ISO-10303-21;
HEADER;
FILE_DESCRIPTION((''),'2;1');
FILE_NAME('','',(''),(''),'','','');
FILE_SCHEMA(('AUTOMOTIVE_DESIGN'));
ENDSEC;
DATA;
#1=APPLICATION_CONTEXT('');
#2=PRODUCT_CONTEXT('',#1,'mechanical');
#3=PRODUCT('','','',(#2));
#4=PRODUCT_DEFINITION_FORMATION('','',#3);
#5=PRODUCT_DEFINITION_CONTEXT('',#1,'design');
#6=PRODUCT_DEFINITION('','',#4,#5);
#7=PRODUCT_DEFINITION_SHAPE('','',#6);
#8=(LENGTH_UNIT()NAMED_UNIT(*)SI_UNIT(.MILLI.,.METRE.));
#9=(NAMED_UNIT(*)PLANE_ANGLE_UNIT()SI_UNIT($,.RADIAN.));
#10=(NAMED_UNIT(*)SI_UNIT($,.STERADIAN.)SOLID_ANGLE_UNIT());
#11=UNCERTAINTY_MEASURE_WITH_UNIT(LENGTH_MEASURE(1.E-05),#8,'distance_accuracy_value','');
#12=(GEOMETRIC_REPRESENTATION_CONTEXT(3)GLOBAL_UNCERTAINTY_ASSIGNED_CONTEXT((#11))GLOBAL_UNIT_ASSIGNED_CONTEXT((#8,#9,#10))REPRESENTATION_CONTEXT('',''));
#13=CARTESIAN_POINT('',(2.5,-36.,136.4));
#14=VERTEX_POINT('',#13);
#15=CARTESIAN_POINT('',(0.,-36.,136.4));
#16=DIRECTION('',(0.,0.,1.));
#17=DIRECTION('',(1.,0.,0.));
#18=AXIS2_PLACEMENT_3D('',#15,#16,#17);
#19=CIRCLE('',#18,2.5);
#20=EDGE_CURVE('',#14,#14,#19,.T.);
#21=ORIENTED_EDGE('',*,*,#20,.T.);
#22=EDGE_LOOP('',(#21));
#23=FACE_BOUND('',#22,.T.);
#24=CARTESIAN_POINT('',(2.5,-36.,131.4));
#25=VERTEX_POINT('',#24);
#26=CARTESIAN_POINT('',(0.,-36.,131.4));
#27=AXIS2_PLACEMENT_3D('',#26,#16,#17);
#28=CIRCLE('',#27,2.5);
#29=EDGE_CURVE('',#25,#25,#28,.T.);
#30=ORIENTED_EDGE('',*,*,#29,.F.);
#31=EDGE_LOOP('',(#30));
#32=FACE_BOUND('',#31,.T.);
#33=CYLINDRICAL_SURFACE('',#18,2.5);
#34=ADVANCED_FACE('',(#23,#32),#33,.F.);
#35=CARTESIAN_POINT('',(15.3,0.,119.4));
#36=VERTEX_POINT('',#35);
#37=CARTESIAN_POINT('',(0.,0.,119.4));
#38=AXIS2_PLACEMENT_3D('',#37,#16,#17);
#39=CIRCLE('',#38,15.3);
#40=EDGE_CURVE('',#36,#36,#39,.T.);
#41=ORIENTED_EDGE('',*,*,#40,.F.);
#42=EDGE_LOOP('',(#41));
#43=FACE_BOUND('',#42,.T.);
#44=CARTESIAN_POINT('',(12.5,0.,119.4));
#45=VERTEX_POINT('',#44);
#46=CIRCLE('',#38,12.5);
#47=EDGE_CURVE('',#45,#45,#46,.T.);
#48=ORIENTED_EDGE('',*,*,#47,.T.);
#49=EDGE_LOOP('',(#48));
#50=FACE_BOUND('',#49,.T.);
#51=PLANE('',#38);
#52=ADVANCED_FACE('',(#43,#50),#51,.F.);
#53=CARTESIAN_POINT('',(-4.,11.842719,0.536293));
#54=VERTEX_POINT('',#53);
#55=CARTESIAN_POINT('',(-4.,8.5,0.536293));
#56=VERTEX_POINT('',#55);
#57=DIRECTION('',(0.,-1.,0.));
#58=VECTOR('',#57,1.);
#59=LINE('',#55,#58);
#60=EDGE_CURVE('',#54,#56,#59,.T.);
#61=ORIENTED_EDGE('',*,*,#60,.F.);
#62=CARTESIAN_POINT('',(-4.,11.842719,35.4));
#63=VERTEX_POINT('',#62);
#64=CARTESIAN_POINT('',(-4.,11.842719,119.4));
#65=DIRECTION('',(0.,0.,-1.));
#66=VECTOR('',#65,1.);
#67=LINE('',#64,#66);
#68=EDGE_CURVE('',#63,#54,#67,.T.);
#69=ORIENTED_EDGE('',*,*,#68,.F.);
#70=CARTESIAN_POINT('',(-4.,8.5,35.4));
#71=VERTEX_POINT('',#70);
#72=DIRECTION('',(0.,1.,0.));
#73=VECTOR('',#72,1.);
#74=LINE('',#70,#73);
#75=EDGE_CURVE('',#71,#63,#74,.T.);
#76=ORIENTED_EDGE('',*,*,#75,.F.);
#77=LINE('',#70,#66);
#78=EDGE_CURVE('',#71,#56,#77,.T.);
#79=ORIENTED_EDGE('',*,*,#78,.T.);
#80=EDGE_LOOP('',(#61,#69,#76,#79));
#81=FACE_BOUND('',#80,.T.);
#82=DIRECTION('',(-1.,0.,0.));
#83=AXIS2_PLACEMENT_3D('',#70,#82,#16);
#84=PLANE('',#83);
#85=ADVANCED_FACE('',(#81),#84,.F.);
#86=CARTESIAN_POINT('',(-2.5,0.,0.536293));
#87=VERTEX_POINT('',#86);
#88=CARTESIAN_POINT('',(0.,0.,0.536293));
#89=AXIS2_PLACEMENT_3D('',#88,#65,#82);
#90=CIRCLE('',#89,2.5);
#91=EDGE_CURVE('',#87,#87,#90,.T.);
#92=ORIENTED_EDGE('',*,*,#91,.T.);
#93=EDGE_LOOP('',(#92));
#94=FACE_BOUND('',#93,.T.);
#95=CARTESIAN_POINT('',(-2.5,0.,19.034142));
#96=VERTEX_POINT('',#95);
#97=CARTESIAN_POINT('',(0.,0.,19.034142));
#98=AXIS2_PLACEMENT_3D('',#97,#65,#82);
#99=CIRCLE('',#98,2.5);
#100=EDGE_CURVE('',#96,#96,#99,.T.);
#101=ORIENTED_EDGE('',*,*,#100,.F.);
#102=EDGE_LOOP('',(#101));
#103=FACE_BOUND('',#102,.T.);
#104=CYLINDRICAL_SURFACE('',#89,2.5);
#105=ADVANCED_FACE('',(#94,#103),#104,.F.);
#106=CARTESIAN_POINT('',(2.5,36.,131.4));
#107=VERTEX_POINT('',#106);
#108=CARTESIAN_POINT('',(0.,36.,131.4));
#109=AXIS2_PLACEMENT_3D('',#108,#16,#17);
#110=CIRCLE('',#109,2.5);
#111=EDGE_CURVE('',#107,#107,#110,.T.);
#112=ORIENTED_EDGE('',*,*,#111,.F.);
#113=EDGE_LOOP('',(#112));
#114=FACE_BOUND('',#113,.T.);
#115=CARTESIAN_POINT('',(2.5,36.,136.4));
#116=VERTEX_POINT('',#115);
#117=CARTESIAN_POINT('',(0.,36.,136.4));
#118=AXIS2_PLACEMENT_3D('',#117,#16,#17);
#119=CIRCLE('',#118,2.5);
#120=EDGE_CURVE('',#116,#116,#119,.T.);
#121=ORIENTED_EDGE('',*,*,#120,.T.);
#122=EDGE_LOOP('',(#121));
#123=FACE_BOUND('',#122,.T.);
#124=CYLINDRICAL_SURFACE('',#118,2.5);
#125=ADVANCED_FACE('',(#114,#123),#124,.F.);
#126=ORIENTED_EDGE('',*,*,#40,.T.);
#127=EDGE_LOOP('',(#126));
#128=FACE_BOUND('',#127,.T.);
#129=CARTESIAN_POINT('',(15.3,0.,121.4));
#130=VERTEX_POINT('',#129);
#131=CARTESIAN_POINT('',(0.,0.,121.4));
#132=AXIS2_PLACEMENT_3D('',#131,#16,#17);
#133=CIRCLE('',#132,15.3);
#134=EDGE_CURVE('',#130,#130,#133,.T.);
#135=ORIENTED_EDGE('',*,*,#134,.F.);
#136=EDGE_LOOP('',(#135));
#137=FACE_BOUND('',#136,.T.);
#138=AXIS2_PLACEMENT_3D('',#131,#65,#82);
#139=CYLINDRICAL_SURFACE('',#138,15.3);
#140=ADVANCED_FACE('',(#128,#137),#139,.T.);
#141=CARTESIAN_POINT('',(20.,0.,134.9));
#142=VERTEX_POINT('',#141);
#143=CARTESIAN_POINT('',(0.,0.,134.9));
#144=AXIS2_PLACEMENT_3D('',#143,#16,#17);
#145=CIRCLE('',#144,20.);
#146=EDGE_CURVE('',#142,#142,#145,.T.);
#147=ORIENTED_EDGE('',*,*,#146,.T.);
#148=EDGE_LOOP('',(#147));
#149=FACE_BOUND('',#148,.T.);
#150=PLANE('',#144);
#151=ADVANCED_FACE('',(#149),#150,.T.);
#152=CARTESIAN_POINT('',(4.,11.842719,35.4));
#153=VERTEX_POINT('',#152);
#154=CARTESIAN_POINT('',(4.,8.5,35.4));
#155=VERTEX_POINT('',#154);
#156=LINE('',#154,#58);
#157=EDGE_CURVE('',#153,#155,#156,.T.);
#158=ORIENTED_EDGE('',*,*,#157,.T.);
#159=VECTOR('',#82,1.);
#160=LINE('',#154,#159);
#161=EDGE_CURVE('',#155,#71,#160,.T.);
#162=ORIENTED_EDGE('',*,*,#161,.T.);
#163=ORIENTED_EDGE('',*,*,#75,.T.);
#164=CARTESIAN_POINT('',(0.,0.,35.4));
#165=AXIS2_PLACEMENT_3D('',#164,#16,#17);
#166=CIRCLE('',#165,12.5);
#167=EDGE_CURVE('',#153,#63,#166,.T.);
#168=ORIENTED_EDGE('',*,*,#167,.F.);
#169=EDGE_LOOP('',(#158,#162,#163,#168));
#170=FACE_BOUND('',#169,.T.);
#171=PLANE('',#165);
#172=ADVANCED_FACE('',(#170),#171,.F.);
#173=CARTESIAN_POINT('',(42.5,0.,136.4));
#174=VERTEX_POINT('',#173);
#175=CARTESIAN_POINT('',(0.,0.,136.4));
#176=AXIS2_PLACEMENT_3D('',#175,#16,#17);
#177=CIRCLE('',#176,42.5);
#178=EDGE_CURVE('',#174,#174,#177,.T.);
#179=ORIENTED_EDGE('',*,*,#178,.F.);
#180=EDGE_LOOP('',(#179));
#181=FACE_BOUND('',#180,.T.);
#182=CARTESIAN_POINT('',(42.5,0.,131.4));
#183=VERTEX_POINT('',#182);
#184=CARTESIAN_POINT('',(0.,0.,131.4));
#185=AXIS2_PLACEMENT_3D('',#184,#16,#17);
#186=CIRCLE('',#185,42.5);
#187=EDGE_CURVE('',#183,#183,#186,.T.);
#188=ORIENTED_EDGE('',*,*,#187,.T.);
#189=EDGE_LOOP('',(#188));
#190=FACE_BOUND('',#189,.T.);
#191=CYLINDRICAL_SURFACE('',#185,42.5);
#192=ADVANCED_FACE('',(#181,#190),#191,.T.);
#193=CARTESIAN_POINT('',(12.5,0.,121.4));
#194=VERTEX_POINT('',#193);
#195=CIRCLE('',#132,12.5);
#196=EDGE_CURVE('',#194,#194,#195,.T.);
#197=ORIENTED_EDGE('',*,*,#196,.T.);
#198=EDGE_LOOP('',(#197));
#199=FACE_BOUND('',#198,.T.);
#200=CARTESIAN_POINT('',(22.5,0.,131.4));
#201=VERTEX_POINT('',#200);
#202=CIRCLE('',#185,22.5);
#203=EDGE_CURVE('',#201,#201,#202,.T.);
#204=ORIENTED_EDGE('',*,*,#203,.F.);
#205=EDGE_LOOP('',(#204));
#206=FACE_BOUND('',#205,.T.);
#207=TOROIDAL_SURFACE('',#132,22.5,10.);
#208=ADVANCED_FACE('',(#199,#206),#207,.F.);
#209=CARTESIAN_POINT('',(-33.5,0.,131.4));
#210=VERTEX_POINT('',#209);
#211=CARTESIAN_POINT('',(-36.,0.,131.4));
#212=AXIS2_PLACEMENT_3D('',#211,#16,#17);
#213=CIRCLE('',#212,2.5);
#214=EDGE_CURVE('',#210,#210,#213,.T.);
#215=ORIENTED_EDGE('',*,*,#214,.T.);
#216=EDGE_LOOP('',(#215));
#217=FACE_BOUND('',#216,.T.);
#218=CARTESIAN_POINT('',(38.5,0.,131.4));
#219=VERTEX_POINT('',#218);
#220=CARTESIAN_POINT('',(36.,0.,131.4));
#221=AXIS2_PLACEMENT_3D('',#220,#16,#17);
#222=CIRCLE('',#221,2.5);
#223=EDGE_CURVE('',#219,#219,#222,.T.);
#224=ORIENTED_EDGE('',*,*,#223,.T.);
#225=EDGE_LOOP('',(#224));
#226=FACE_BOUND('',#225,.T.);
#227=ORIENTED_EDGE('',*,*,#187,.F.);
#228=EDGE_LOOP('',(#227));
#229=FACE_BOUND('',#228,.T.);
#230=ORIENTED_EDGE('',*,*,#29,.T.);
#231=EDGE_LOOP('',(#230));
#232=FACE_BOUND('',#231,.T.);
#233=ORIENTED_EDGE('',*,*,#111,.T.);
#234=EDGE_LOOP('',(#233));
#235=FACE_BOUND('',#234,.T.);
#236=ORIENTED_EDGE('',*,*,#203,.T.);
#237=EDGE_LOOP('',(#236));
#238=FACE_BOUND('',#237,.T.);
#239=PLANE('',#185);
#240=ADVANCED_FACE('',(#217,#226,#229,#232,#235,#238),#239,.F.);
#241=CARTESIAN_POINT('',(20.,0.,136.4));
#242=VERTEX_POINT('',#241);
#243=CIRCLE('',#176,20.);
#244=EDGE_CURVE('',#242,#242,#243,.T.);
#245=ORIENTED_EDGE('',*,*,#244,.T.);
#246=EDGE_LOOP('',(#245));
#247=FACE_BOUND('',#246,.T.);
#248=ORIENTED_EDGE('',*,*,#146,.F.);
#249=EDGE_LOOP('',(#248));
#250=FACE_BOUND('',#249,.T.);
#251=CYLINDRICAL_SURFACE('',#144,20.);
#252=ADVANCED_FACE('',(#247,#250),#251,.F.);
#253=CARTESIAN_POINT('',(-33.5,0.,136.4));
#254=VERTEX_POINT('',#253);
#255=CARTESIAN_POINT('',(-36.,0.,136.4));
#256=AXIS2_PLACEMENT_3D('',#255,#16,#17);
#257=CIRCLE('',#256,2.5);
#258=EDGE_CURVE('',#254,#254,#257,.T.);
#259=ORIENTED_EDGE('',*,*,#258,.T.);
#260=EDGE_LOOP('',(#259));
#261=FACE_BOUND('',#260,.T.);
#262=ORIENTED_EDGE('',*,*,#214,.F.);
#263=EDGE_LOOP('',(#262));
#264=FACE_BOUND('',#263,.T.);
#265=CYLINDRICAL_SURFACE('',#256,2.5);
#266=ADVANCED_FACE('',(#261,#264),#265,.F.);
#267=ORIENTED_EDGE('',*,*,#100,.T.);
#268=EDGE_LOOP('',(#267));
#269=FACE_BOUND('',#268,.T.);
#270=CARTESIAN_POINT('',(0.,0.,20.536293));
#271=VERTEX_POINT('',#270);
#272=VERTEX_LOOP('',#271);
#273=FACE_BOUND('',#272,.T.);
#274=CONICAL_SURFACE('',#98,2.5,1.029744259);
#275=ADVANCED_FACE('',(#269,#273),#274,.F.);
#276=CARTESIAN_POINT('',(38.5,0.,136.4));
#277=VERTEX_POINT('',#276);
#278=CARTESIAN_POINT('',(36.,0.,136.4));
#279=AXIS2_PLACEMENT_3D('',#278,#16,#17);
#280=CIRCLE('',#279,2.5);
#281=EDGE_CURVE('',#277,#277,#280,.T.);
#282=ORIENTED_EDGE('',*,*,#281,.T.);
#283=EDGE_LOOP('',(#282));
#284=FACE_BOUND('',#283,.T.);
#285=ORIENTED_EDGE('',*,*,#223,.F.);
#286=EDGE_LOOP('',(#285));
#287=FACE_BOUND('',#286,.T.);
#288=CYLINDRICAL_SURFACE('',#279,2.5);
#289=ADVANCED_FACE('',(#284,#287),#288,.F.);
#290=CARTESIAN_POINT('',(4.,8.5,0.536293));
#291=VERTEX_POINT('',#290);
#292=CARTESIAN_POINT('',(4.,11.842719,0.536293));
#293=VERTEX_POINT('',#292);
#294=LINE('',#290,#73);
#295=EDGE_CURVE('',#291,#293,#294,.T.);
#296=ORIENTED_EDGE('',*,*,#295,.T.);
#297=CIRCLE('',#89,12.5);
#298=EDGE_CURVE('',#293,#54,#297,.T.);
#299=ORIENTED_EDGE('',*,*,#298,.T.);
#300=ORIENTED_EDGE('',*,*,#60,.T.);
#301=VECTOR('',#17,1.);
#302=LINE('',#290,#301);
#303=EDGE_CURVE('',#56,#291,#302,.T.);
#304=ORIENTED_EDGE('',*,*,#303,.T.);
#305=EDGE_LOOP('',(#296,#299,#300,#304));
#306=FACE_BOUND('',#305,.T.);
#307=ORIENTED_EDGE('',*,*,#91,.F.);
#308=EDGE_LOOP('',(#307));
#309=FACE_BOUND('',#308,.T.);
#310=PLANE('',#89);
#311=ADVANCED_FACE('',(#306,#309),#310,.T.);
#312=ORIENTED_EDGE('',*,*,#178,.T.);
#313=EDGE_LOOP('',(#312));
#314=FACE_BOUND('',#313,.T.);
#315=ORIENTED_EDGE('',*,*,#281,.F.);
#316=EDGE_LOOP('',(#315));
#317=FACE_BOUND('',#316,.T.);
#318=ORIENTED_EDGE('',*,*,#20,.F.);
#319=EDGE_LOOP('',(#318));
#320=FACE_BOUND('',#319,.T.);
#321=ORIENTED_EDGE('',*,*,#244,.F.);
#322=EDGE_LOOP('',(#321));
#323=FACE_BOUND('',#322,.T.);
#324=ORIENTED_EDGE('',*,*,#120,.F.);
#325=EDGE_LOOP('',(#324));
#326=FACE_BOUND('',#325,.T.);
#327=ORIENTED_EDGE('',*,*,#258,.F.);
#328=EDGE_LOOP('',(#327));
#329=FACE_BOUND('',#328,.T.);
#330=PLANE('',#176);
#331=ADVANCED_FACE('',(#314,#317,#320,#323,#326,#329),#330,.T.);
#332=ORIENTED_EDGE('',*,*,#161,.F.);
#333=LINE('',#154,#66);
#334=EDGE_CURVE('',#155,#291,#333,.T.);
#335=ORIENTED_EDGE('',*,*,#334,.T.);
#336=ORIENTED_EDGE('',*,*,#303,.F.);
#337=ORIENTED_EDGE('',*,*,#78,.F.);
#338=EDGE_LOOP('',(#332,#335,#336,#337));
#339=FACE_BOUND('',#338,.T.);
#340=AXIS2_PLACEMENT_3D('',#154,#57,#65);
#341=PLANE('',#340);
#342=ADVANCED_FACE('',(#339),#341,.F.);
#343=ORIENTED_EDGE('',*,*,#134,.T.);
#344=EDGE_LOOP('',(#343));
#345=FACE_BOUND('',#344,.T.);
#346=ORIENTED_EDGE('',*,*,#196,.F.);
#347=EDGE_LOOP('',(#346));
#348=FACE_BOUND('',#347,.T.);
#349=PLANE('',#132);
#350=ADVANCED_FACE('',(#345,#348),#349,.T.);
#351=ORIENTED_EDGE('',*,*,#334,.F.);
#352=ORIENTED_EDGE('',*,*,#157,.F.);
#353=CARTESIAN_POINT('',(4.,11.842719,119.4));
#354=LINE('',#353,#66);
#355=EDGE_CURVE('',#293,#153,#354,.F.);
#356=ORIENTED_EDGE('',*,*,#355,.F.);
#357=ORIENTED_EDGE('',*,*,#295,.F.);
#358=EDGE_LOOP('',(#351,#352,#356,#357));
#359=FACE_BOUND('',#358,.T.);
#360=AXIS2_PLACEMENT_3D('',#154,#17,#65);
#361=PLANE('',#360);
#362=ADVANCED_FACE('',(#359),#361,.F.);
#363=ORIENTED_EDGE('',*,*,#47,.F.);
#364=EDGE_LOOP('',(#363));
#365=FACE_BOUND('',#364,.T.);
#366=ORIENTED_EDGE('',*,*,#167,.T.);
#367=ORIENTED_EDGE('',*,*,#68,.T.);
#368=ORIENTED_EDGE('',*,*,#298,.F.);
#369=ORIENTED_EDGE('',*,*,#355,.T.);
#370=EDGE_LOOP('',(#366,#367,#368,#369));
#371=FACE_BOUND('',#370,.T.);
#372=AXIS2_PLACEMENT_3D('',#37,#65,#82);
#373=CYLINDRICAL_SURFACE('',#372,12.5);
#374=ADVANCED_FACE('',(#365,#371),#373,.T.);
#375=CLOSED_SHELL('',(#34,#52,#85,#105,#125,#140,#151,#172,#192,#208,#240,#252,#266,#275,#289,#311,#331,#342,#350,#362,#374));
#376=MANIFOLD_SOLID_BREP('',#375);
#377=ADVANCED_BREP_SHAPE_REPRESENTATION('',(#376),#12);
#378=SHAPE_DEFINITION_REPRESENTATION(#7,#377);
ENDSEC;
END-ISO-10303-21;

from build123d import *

# Parameters (mm, degrees)
SKETCH1_R                 = 12.5
BOSS_EXTRUDE1_DEPTH       = 119.4
SKETCH4_W                 = 8
SKETCH4_H                 = 8
CUT_EXTRUDE1_DEPTH        = 35.4
SKETCH5_R                 = 15.3
BOSS_EXTRUDE2_DEPTH       = 2
SKETCH10_R                = 12.5
BOSS_EXTRUDE5_DEPTH       = 15
SKETCH14_R                = 12.5
CUT_EXTRUDE3_DEPTH        = 0.53629326
M6X1_0_TAPPED_HOLE2_D     = 5
M6X1_0_TAPPED_HOLE2_DEPTH = 18.497848452
M6X1_0_TAPPED_HOLE2_TIP   = 1.502151548
SKETCH20_R                = 42.5
BOSS_EXTRUDE6_DEPTH       = 5
FILLET3_R                 = 10
M6X1_0_TAPPED_HOLE3_D     = 5
SKETCH23_R                = 20
CUT_EXTRUDE4_DEPTH        = 1.5


with BuildPart() as part:
    # Sketch1 → Boss-Extrude1 (new body)
    with BuildSketch(Plane.XY):
        Circle(SKETCH1_R)
    extrude(amount=BOSS_EXTRUDE1_DEPTH)

    # Sketch4 → Cut-Extrude1 (cut)
    with BuildSketch(Plane(origin=(0, 0, 0), x_dir=(-1, 0, 0), z_dir=(0, 0, -1))):
        with Locations((0, 12.5)):
            Rectangle(SKETCH4_W, SKETCH4_H)
    extrude(amount=-CUT_EXTRUDE1_DEPTH, mode=Mode.SUBTRACT)

    # Sketch5 → Boss-Extrude2 (add)
    with BuildSketch(Plane.XY.offset(119.4)):
        Circle(SKETCH5_R)
    extrude(amount=BOSS_EXTRUDE2_DEPTH)

    # Sketch10 → Boss-Extrude5 (add)
    with BuildSketch(Plane.XY.offset(121.4)):
        with Locations(Location((0, 0, 0), (0, 0, 108.662924885))):
            Circle(SKETCH10_R)
    extrude(amount=BOSS_EXTRUDE5_DEPTH)

    # Sketch14 → Cut-Extrude3 (cut)
    with BuildSketch(Plane(origin=(0, 0, 0), x_dir=(-1, 0, 0), z_dir=(0, 0, -1))):
        with Locations(Location((0, 0, 0), (0, 0, 71.337075115))):
            Circle(SKETCH14_R)
    extrude(amount=-CUT_EXTRUDE3_DEPTH, mode=Mode.SUBTRACT)

    # M6x1.0 Tapped Hole2
    with Locations(Plane(origin=(0, 0, 0.53629326), x_dir=(-1, 0, 0), z_dir=(0, 0, -1))):
        with Locations((0, 0)):
            Hole(M6X1_0_TAPPED_HOLE2_D / 2, depth=M6X1_0_TAPPED_HOLE2_DEPTH)
            with Locations((0, 0, -(M6X1_0_TAPPED_HOLE2_DEPTH + M6X1_0_TAPPED_HOLE2_TIP / 2))):  # 118° drill point
                Cone(0, M6X1_0_TAPPED_HOLE2_D / 2, M6X1_0_TAPPED_HOLE2_TIP, mode=Mode.SUBTRACT)

    # Sketch20 → Boss-Extrude6 (add)
    with BuildSketch(Plane.XY.offset(136.4)):
        Circle(SKETCH20_R)
    extrude(amount=-BOSS_EXTRUDE6_DEPTH)

    # Fillet3
    fillet3_edges = [part.edges().sort_by_distance(p)[0] for p in [
        (4, -11.842719282, 131.4),
    ]]
    fillet(fillet3_edges, radius=FILLET3_R - 0.0001)  # a hair under: the kernel refuses the full size

    # M6x1.0 Tapped Hole3 (through all)
    with Locations(Plane.XY.offset(136.4)):
        with Locations((0, 36), (36, 0), (0, -36), (-36, 0)):
            Hole(M6X1_0_TAPPED_HOLE3_D / 2)

    # Sketch23 → Cut-Extrude4 (cut)
    with BuildSketch(Plane.XY.offset(136.4)):
        Circle(SKETCH23_R)
    extrude(amount=-CUT_EXTRUDE4_DEPTH, mode=Mode.SUBTRACT)


solid = part.part
